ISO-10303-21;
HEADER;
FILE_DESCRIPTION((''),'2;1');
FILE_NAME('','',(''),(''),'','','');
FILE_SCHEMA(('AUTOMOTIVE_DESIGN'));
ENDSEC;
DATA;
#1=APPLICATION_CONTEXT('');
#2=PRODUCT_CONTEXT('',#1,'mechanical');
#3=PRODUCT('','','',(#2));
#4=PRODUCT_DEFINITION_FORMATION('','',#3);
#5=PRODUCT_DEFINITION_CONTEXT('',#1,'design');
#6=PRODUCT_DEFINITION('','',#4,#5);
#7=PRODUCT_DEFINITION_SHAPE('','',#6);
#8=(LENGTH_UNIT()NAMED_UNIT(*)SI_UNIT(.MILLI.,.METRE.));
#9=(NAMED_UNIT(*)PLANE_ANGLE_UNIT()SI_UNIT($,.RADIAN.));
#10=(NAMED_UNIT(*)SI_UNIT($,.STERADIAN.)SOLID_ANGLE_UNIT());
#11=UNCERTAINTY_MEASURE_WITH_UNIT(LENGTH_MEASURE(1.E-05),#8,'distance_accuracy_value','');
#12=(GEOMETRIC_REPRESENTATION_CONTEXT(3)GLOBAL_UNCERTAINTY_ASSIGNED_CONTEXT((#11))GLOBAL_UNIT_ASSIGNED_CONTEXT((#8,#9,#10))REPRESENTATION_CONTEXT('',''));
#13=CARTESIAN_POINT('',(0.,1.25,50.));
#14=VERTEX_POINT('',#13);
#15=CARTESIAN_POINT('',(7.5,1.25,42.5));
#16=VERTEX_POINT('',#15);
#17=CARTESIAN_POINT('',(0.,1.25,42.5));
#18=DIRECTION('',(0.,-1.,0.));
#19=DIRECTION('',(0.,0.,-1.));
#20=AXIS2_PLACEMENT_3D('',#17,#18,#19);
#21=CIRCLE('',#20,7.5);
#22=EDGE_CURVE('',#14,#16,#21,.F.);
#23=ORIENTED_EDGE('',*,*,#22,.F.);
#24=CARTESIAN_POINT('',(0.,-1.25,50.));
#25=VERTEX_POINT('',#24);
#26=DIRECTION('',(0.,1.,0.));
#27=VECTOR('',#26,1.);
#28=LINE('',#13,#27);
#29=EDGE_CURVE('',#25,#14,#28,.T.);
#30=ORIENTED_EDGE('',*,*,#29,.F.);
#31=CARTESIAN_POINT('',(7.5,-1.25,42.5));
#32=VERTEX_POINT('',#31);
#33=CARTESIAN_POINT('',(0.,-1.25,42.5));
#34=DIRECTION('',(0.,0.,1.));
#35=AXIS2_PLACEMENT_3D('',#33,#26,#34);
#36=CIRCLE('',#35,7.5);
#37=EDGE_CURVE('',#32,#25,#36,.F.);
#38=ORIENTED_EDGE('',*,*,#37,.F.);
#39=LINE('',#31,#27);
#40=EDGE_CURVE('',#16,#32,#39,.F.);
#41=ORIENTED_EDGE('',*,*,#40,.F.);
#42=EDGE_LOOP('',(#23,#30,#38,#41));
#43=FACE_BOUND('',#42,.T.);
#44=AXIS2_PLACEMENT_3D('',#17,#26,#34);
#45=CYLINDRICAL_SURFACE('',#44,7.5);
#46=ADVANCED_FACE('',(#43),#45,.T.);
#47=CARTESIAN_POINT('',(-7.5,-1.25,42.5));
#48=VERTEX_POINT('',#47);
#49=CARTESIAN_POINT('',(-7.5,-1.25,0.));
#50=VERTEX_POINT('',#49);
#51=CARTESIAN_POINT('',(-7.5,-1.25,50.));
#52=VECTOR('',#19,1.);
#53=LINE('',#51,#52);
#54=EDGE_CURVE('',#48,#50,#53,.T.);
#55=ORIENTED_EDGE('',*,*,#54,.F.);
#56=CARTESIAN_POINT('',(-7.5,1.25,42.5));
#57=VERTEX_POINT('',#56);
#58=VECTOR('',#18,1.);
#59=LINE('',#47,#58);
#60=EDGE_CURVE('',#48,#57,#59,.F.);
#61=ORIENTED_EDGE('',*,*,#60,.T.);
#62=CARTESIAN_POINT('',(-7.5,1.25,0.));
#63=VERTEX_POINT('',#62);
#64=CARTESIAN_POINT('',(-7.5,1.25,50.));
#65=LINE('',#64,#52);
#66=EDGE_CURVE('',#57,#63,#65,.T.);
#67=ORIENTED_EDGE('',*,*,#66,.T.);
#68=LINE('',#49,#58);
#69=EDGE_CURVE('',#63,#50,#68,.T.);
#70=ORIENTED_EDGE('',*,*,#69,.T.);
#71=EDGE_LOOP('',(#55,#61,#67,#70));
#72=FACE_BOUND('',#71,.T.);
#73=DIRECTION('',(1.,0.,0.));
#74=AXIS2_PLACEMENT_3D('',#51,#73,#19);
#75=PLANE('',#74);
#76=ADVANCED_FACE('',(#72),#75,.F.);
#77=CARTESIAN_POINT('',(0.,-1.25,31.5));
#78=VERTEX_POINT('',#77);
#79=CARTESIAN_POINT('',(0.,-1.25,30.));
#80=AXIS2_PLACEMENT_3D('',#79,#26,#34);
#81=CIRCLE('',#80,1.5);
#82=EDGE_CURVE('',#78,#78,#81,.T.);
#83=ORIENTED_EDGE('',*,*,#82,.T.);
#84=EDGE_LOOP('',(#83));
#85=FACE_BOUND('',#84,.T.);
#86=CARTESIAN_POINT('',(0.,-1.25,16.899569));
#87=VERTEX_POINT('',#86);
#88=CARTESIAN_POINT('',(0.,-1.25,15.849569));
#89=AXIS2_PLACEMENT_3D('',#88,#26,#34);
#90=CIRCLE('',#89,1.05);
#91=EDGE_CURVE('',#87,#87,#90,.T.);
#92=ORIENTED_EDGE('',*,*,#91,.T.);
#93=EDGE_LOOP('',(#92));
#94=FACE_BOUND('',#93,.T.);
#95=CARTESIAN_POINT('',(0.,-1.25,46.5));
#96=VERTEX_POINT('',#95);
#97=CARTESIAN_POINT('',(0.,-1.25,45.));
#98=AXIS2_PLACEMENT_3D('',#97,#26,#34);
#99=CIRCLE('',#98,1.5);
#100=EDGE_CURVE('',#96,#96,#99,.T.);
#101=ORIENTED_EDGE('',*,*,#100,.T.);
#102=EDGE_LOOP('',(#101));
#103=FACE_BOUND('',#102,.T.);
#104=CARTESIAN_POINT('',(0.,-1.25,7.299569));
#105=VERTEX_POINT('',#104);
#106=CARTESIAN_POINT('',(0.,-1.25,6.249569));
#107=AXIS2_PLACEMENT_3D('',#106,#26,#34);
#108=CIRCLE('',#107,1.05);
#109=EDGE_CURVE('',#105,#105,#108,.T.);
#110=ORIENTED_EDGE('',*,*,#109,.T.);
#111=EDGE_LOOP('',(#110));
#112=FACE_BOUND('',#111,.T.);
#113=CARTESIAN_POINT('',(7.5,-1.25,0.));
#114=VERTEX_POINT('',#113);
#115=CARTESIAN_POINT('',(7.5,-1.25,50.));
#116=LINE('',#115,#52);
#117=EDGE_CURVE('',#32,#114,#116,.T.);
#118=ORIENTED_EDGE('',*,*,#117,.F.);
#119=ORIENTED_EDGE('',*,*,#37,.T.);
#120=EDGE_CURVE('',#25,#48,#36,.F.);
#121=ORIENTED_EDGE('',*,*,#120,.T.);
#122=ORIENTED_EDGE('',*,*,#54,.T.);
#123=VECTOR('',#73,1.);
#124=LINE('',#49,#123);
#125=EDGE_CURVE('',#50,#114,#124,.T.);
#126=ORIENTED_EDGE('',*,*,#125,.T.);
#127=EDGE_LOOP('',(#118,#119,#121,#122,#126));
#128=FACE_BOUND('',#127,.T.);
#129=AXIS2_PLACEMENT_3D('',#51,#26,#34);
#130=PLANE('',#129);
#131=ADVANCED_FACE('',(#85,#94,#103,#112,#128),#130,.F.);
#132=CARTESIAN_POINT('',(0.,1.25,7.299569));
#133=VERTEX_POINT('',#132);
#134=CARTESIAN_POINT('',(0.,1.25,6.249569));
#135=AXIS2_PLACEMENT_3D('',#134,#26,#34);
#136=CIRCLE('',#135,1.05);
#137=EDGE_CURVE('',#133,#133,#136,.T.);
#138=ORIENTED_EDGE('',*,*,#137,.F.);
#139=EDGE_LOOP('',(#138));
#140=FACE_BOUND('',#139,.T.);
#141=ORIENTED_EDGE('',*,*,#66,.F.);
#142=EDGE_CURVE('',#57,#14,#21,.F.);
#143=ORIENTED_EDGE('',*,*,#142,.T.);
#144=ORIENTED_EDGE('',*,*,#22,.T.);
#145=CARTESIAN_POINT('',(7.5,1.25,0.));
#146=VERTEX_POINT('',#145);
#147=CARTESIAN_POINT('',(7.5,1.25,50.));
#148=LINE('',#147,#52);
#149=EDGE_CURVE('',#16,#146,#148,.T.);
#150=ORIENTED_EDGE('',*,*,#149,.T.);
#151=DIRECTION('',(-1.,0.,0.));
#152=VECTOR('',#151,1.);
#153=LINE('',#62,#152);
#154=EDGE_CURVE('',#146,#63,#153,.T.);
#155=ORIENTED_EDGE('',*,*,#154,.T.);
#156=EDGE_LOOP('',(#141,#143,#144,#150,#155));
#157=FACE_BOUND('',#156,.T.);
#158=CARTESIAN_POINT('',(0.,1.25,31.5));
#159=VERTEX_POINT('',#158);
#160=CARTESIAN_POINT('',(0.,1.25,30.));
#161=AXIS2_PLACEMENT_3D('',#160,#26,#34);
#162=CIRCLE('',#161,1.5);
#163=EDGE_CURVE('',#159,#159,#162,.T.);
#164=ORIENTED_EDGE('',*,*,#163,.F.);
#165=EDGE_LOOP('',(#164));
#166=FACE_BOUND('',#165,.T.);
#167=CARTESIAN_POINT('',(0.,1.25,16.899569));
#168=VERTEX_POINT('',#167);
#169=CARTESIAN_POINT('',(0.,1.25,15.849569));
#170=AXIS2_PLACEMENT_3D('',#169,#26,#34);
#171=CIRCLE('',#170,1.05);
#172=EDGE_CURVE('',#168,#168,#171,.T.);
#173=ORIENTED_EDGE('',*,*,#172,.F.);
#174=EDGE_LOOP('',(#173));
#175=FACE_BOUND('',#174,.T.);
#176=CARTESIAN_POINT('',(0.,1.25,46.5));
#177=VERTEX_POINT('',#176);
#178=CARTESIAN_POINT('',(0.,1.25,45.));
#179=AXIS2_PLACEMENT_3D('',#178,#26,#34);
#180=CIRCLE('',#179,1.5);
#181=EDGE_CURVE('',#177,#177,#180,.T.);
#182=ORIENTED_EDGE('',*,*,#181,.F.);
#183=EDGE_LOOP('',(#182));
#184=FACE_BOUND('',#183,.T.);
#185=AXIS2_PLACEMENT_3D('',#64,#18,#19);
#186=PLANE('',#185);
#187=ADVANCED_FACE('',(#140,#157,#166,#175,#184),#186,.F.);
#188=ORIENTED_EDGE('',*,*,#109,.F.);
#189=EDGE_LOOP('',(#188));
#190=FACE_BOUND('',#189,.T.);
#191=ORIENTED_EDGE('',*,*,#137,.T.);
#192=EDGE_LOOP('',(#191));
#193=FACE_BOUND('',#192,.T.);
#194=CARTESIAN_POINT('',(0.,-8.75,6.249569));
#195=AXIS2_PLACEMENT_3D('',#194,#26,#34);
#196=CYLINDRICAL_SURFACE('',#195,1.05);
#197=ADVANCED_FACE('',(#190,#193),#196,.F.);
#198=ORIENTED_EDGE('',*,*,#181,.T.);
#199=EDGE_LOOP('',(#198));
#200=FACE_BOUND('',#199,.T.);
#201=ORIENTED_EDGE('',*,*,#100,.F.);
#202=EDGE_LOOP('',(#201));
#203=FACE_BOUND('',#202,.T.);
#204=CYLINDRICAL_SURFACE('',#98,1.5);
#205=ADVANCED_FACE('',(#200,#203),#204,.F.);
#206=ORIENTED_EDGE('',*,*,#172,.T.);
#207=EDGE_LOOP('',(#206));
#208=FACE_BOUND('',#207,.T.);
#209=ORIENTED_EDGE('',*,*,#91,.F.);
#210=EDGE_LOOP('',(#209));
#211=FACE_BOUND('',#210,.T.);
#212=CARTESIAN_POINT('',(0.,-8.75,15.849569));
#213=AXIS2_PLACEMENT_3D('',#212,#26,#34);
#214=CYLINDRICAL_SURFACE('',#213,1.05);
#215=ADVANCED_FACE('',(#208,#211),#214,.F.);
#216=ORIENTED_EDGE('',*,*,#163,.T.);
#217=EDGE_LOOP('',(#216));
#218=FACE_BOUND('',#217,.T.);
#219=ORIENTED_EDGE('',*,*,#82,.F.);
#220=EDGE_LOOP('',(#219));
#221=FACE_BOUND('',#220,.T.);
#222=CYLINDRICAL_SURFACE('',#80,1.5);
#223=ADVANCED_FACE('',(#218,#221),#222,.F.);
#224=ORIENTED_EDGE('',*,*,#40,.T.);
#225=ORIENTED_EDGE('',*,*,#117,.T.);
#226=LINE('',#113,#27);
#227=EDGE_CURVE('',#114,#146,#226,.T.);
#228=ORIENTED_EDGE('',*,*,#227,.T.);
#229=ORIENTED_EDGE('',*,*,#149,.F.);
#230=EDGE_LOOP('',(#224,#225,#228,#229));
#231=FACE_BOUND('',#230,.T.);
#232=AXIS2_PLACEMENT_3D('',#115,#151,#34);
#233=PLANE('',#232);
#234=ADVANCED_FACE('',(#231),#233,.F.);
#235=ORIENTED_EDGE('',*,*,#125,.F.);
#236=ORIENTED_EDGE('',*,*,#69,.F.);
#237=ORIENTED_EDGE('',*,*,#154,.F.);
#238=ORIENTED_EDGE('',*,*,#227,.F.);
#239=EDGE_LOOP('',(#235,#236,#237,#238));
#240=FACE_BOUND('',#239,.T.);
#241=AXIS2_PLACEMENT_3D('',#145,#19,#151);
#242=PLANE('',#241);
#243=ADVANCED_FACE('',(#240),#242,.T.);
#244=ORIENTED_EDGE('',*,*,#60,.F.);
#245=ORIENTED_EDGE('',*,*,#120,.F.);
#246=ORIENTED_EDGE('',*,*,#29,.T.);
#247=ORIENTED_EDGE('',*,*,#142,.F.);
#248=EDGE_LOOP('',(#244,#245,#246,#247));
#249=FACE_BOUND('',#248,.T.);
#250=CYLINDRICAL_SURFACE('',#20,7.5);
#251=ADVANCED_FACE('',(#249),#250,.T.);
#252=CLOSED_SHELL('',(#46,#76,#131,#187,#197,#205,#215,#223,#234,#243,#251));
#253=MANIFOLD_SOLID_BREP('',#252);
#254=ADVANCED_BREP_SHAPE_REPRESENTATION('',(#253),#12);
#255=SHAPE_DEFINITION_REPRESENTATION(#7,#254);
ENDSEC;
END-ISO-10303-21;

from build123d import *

# Parameters (mm, degrees)
ESQUISSE1_W                = 15
ESQUISSE1_H                = 2.5
EXTRUSION1_DEPTH           = 50
ESQUISSE2_R                = 1.5
EXTRUSION2_DEPTH           = 51.621141828
R_P_TITION_LIN_AIRE1_COUNT = 2
R_P_TITION_LIN_AIRE1_PITCH = 15
CONG_1_R                   = 7.5
ESQUISSE5_R                = 1.05
ENL_V_MAT_EXTRU_3_DEPTH    = 10
ESQUISSE6_R                = 1.05
ENL_V_MAT_EXTRU_4_DEPTH    = 10


with BuildPart() as part:
    # Esquisse1 → Extrusion1 (new body)
    with BuildSketch(Plane.XY):
        Rectangle(ESQUISSE1_W, ESQUISSE1_H)
    extrude(amount=EXTRUSION1_DEPTH)

    # Esquisse2 → Extrusion2 (cut, through all)
    with BuildSketch(Plane(origin=(0, 1.25, 0), x_dir=(1, 0, 0), z_dir=(0, 1, 0))):
        with Locations(Location((0, -45, 0), (0, 0, 270))):
            Circle(ESQUISSE2_R)
    extrusion2 = extrude(amount=-EXTRUSION2_DEPTH, mode=Mode.SUBTRACT)

    # Répétition linéaire1: Extrusion2 ×2
    with Locations(*[(0, 0, -i * R_P_TITION_LIN_AIRE1_PITCH) for i in range(1, R_P_TITION_LIN_AIRE1_COUNT)]):
        add(extrusion2, mode=Mode.SUBTRACT)

    # Congé1
    cong_1_edges = [part.edges().sort_by_distance(p)[0] for p in [
        (-7.5, 0, 50),
        (7.5, 0, 50),
    ]]
    fillet(cong_1_edges, radius=CONG_1_R - 0.0001)  # a hair under: the kernel refuses the full size

    # Esquisse5 → Enlèv. mat.-Extru.3 (cut)
    with BuildSketch(Plane(origin=(0, 1.25, 0), x_dir=(-1, 0, 0), z_dir=(0, 1, 0))):
        with Locations(Location((0, 6.249569422, 0), (0, 0, 90))):
            Circle(ESQUISSE5_R)
    extrude(amount=-ENL_V_MAT_EXTRU_3_DEPTH, mode=Mode.SUBTRACT)

    # Esquisse6 → Enlèv. mat.-Extru.4 (cut)
    with BuildSketch(Plane(origin=(0, 1.25, 0), x_dir=(1, 0, 0), z_dir=(0, 1, 0))):
        with Locations(Location((0, -15.849569422, 0), (0, 0, 270))):
            Circle(ESQUISSE6_R)
    extrude(amount=-ENL_V_MAT_EXTRU_4_DEPTH, mode=Mode.SUBTRACT)


solid = part.part
